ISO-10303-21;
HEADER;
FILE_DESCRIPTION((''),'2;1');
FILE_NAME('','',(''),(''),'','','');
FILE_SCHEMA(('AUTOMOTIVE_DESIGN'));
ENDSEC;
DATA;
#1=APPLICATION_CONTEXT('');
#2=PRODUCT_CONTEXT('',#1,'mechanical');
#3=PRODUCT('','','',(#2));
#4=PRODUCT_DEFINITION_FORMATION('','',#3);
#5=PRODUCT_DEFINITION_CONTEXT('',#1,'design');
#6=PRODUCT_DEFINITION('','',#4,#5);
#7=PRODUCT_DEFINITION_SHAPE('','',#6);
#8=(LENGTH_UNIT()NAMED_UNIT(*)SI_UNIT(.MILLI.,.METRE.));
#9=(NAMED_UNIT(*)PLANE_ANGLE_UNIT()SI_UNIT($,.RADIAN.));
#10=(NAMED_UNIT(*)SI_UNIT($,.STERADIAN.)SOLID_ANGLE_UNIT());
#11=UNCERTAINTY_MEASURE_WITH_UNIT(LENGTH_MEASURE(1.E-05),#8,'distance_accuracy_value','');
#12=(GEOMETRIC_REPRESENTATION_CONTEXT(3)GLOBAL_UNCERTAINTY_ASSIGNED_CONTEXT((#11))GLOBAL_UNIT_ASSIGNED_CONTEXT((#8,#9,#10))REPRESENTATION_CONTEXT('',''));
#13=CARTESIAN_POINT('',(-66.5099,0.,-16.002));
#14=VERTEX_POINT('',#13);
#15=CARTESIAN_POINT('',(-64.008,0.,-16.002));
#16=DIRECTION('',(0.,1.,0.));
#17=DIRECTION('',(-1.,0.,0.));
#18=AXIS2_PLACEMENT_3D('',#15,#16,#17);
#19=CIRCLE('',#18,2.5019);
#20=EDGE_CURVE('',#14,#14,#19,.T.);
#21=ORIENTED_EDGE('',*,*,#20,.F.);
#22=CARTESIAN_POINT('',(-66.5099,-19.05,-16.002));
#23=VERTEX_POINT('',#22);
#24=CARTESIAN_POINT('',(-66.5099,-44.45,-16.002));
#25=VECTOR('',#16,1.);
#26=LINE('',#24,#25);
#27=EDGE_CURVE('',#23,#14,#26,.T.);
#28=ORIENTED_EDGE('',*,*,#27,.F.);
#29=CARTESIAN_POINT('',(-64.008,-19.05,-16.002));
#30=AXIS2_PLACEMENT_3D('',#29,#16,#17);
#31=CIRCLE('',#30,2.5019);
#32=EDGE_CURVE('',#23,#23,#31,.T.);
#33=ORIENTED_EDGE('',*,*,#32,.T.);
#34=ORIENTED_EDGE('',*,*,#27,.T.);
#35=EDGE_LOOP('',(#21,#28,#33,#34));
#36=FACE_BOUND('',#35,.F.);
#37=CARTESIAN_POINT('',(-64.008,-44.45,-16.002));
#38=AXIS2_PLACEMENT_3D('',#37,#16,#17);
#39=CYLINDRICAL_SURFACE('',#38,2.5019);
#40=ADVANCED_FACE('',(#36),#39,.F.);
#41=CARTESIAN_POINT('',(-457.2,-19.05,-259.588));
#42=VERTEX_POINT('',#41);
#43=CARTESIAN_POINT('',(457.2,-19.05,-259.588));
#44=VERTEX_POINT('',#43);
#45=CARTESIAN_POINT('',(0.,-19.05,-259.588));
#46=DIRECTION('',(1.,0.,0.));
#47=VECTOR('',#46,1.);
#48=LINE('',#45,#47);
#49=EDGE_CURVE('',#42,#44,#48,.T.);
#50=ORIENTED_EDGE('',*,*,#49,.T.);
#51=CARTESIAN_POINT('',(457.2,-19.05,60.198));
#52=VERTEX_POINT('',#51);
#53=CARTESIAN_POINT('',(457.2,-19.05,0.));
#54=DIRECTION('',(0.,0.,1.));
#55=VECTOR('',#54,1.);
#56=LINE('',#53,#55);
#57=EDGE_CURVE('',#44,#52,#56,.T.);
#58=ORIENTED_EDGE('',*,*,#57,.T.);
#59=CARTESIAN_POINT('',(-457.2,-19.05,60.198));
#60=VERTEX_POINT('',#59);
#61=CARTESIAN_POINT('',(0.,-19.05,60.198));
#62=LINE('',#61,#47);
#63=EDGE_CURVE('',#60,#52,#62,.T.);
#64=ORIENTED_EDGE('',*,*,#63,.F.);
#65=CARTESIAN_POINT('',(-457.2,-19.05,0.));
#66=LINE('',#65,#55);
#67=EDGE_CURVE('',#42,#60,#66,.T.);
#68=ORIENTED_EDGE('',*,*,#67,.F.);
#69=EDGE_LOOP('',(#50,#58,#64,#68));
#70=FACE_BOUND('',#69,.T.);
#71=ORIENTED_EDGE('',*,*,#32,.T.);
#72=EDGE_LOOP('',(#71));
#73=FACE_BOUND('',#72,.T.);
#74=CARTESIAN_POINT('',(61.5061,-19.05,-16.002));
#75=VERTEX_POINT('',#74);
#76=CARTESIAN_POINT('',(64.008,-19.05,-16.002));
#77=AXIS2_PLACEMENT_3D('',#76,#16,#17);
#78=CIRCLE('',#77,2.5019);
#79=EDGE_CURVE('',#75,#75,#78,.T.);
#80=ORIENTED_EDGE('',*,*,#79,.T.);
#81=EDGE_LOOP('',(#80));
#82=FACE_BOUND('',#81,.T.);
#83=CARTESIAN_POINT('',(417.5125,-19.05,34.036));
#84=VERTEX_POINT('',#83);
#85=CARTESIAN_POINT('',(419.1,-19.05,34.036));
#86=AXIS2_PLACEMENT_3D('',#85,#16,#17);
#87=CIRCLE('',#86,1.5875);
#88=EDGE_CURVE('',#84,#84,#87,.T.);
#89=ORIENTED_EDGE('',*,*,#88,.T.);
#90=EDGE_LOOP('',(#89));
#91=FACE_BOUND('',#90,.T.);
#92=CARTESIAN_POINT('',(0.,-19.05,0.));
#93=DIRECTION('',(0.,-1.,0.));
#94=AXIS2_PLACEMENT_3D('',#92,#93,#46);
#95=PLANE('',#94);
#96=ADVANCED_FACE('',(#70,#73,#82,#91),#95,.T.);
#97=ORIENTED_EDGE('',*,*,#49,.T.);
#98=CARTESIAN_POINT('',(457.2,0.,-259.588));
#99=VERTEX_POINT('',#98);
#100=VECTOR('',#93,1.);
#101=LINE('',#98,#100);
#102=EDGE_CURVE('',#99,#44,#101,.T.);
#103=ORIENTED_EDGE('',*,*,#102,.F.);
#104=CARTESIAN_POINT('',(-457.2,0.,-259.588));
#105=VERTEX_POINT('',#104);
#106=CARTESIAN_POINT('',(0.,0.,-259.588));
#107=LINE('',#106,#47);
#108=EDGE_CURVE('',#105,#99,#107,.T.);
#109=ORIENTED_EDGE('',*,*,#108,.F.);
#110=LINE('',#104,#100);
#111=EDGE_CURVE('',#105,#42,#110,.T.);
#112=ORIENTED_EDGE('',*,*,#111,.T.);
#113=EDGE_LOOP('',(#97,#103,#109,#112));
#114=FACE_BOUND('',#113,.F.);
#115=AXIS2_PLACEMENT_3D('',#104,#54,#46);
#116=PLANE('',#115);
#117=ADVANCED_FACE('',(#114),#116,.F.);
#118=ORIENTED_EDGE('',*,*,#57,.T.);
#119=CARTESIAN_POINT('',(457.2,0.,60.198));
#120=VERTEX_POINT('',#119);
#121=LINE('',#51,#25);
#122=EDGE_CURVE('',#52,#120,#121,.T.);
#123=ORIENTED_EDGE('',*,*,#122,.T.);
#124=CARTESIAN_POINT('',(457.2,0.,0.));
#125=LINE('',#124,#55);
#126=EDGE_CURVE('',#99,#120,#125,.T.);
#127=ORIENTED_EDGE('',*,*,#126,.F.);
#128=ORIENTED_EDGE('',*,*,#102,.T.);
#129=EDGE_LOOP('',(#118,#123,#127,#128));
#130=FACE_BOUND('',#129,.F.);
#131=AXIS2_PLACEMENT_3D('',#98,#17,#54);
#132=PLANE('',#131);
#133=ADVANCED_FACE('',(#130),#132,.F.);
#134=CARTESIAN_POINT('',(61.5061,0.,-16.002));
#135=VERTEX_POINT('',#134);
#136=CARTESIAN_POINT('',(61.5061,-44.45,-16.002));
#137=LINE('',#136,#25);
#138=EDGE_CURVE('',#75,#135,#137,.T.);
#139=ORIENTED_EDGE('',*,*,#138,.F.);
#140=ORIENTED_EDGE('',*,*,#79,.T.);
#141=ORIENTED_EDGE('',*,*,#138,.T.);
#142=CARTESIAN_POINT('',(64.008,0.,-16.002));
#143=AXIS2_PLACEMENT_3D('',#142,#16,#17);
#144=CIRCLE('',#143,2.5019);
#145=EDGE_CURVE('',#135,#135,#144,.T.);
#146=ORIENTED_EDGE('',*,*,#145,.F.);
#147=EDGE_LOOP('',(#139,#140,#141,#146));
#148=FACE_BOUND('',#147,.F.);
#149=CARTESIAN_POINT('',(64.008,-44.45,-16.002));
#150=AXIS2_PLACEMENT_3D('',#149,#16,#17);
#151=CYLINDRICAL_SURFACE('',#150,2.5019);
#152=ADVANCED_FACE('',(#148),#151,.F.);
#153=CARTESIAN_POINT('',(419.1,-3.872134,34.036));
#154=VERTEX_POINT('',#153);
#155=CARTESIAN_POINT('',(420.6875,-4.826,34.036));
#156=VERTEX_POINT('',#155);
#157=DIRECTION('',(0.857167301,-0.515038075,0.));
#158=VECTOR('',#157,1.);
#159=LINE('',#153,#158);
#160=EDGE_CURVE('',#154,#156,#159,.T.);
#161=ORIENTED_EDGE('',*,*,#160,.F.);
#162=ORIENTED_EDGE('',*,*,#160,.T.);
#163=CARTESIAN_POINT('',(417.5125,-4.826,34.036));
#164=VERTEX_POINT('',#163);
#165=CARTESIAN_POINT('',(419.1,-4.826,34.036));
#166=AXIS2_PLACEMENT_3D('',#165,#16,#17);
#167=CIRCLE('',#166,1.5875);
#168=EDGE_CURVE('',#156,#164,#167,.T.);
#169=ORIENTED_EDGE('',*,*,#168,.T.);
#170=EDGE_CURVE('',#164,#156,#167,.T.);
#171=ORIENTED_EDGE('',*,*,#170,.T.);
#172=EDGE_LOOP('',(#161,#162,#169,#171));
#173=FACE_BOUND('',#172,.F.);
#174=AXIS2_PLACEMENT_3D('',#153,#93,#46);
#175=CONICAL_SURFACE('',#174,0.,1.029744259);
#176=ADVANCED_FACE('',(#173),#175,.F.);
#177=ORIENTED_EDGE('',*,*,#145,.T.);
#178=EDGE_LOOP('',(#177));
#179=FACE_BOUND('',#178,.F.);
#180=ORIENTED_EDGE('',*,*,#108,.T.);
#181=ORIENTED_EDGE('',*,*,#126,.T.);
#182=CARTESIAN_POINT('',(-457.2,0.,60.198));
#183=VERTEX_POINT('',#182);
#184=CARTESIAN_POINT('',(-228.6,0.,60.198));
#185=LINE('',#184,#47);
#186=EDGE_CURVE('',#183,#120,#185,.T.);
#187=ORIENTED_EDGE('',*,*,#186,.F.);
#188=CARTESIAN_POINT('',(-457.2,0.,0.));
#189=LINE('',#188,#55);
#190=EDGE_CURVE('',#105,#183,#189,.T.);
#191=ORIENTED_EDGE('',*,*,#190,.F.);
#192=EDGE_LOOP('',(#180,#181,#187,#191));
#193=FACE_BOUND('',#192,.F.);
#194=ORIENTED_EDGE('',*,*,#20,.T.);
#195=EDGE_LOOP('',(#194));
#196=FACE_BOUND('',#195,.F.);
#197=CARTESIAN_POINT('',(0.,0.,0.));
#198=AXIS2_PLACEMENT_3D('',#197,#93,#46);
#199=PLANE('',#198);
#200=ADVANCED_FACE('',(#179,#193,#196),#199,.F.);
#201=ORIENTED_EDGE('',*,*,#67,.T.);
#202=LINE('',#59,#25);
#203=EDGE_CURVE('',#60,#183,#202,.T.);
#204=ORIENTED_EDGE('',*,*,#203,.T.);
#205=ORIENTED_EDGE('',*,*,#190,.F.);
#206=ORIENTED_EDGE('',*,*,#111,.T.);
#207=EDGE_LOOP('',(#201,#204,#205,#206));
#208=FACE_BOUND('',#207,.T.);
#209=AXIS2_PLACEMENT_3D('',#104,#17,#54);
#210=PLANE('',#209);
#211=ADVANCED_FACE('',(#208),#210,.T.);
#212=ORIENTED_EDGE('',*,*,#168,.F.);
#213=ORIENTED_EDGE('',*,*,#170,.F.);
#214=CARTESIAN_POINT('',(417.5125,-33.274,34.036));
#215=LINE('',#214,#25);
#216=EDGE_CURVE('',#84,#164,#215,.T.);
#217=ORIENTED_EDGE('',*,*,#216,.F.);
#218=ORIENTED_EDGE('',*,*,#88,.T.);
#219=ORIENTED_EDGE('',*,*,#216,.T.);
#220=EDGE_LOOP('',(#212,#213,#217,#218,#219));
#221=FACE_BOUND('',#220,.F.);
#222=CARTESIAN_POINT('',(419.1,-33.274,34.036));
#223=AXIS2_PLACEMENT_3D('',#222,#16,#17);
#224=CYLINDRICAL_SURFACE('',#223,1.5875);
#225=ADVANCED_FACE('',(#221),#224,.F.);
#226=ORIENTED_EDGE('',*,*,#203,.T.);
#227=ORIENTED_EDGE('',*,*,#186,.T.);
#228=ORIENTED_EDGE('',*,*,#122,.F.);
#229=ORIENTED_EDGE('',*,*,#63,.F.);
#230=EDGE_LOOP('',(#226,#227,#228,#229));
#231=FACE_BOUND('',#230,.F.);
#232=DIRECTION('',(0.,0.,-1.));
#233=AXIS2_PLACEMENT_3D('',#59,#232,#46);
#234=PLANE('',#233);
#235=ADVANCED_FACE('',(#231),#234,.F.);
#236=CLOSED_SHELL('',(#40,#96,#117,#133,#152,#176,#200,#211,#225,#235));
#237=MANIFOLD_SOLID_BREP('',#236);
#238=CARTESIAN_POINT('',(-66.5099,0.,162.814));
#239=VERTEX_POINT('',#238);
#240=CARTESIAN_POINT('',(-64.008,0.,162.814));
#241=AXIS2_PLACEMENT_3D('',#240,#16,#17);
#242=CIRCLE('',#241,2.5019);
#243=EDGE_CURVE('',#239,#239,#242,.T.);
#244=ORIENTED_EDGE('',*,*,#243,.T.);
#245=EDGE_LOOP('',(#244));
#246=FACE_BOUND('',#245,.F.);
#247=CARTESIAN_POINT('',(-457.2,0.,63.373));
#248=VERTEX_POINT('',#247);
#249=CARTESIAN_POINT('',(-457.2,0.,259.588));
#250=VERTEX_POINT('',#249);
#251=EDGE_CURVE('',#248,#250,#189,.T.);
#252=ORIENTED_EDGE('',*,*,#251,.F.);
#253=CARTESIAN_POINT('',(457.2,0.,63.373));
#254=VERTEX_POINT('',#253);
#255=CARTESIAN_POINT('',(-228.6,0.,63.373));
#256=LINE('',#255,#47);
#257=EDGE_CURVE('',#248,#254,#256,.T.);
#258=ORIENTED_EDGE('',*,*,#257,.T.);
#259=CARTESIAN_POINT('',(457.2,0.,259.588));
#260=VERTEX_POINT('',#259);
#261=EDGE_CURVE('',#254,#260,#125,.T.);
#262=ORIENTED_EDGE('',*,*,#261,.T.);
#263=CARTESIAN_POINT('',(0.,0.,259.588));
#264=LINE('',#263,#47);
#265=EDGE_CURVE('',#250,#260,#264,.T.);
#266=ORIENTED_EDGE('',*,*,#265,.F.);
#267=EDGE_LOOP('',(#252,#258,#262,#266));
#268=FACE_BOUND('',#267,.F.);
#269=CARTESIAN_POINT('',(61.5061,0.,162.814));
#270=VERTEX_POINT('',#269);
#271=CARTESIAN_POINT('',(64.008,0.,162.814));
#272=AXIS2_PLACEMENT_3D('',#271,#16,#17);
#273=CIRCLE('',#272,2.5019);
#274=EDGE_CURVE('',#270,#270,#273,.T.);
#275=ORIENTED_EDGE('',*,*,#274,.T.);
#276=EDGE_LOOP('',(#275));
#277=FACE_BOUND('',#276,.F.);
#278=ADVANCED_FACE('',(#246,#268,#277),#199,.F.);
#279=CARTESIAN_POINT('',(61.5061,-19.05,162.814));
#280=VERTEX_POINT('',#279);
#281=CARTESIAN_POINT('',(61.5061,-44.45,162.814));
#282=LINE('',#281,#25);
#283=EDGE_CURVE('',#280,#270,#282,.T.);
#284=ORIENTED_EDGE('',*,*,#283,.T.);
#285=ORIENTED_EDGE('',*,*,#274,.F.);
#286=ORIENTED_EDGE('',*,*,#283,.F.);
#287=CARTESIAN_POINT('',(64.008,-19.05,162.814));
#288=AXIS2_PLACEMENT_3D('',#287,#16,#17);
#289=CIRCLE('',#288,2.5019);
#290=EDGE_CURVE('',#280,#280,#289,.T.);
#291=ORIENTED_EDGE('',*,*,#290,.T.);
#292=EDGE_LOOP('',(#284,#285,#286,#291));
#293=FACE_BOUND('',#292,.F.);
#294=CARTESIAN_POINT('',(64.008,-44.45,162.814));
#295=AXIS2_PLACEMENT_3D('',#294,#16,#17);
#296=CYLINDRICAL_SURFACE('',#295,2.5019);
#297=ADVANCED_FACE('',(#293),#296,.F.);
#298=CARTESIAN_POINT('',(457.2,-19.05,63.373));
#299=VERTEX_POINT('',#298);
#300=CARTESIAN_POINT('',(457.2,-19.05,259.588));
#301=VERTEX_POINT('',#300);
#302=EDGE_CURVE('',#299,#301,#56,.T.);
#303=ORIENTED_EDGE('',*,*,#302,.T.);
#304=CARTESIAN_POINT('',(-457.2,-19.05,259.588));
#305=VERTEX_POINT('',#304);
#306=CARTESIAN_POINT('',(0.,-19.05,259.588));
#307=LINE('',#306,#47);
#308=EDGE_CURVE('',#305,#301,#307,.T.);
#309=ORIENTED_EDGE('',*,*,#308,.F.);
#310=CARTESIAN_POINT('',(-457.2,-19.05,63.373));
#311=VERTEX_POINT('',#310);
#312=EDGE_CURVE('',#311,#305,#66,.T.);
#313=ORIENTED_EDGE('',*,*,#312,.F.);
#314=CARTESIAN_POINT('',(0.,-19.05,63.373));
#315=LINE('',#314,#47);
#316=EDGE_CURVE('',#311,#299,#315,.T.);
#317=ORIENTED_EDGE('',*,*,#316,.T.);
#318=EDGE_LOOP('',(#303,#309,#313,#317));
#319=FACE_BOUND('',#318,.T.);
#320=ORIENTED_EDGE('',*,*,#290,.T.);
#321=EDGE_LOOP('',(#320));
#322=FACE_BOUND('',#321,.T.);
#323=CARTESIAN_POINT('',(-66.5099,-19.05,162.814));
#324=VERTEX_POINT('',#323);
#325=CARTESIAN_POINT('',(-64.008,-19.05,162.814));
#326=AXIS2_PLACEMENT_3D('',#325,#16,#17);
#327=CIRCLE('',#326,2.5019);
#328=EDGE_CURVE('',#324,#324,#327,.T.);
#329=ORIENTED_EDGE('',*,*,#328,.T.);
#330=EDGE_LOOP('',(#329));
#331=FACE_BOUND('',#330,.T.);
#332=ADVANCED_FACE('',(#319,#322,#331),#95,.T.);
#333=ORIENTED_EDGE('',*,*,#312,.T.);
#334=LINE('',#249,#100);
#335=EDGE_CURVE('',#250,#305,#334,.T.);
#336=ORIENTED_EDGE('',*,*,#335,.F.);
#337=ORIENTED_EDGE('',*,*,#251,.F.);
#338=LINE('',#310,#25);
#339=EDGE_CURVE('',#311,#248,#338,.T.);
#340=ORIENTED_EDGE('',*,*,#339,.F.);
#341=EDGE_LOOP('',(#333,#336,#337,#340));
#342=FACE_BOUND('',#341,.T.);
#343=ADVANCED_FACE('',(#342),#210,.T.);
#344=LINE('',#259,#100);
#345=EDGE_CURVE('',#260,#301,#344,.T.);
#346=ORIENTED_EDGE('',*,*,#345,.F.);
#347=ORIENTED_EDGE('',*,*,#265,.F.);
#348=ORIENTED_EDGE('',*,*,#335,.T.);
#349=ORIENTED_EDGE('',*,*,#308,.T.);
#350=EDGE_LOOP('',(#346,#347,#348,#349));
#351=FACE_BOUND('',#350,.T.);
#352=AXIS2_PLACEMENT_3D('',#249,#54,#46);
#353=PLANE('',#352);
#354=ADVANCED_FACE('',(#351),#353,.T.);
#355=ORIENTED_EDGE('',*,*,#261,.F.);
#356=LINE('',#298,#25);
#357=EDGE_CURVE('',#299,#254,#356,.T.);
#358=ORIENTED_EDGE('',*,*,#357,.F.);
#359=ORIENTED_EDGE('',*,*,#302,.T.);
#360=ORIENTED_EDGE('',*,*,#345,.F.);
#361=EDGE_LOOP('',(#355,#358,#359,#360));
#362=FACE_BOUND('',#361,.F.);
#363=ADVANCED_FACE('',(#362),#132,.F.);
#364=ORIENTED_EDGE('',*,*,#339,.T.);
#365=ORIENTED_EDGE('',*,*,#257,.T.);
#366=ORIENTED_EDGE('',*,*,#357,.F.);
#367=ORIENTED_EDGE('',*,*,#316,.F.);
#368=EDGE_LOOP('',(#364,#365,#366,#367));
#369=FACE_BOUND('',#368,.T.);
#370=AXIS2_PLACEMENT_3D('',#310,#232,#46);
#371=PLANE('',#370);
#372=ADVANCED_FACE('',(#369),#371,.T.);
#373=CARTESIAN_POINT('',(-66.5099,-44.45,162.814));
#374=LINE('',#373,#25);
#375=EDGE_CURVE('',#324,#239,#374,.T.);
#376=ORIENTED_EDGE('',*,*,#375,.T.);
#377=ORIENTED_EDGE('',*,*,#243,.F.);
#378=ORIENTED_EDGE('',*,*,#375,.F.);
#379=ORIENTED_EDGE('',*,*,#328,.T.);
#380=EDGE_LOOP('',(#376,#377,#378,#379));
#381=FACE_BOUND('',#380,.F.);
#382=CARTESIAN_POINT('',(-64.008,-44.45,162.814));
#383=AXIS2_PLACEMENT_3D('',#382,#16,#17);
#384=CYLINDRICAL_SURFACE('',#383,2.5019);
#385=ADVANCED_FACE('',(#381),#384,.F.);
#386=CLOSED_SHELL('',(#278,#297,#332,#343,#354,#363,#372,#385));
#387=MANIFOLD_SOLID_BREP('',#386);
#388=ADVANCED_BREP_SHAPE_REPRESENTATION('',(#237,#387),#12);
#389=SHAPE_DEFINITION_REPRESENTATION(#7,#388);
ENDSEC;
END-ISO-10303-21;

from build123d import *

# Parameters (mm, degrees)
F0_W     = 914.4
F0_H     = 519.176
F1_DEPTH = 19.05
F3_D     = 5.0038
F3_DEPTH = 25.4
F3_TIP   = 1.5032931827
F5_D     = 3.175
F5_DEPTH = 14.224
F5_TIP   = 0.9538662327
F6_W     = 914.4
F6_H     = 3.175
F7_DEPTH = 25.4


with BuildPart() as f1:
    # F0 (on Front) → F1 (new body)
    with BuildSketch(Plane.XZ):
        Rectangle(F0_W, F0_H)
    extrude(amount=F1_DEPTH)

    # F3
    with Locations(Plane.XZ.offset(19.05)):
        with Locations((-64.008, 162.814), (64.008, 162.814), (-64.008, -16.002), (64.008, -16.002)):
            Hole(F3_D / 2, depth=F3_DEPTH)
            with Locations((0, 0, -(F3_DEPTH + F3_TIP / 2))):  # 118° drill point
                Cone(0, F3_D / 2, F3_TIP, mode=Mode.SUBTRACT)

    # F5
    with Locations(Plane.XZ.offset(19.05)):
        with Locations((419.1, 34.036)):
            Hole(F5_D / 2, depth=F5_DEPTH)
            with Locations((0, 0, -(F5_DEPTH + F5_TIP / 2))):  # 118° drill point
                Cone(0, F5_D / 2, F5_TIP, mode=Mode.SUBTRACT)

    # F6 (on face) → F7 (cut)
    with BuildSketch(Plane.XZ.offset(19.05)):
        with Locations((0, 61.7855)):
            Rectangle(F6_W, F6_H)
    extrude(amount=-F7_DEPTH, mode=Mode.SUBTRACT)


solid = f1.part
